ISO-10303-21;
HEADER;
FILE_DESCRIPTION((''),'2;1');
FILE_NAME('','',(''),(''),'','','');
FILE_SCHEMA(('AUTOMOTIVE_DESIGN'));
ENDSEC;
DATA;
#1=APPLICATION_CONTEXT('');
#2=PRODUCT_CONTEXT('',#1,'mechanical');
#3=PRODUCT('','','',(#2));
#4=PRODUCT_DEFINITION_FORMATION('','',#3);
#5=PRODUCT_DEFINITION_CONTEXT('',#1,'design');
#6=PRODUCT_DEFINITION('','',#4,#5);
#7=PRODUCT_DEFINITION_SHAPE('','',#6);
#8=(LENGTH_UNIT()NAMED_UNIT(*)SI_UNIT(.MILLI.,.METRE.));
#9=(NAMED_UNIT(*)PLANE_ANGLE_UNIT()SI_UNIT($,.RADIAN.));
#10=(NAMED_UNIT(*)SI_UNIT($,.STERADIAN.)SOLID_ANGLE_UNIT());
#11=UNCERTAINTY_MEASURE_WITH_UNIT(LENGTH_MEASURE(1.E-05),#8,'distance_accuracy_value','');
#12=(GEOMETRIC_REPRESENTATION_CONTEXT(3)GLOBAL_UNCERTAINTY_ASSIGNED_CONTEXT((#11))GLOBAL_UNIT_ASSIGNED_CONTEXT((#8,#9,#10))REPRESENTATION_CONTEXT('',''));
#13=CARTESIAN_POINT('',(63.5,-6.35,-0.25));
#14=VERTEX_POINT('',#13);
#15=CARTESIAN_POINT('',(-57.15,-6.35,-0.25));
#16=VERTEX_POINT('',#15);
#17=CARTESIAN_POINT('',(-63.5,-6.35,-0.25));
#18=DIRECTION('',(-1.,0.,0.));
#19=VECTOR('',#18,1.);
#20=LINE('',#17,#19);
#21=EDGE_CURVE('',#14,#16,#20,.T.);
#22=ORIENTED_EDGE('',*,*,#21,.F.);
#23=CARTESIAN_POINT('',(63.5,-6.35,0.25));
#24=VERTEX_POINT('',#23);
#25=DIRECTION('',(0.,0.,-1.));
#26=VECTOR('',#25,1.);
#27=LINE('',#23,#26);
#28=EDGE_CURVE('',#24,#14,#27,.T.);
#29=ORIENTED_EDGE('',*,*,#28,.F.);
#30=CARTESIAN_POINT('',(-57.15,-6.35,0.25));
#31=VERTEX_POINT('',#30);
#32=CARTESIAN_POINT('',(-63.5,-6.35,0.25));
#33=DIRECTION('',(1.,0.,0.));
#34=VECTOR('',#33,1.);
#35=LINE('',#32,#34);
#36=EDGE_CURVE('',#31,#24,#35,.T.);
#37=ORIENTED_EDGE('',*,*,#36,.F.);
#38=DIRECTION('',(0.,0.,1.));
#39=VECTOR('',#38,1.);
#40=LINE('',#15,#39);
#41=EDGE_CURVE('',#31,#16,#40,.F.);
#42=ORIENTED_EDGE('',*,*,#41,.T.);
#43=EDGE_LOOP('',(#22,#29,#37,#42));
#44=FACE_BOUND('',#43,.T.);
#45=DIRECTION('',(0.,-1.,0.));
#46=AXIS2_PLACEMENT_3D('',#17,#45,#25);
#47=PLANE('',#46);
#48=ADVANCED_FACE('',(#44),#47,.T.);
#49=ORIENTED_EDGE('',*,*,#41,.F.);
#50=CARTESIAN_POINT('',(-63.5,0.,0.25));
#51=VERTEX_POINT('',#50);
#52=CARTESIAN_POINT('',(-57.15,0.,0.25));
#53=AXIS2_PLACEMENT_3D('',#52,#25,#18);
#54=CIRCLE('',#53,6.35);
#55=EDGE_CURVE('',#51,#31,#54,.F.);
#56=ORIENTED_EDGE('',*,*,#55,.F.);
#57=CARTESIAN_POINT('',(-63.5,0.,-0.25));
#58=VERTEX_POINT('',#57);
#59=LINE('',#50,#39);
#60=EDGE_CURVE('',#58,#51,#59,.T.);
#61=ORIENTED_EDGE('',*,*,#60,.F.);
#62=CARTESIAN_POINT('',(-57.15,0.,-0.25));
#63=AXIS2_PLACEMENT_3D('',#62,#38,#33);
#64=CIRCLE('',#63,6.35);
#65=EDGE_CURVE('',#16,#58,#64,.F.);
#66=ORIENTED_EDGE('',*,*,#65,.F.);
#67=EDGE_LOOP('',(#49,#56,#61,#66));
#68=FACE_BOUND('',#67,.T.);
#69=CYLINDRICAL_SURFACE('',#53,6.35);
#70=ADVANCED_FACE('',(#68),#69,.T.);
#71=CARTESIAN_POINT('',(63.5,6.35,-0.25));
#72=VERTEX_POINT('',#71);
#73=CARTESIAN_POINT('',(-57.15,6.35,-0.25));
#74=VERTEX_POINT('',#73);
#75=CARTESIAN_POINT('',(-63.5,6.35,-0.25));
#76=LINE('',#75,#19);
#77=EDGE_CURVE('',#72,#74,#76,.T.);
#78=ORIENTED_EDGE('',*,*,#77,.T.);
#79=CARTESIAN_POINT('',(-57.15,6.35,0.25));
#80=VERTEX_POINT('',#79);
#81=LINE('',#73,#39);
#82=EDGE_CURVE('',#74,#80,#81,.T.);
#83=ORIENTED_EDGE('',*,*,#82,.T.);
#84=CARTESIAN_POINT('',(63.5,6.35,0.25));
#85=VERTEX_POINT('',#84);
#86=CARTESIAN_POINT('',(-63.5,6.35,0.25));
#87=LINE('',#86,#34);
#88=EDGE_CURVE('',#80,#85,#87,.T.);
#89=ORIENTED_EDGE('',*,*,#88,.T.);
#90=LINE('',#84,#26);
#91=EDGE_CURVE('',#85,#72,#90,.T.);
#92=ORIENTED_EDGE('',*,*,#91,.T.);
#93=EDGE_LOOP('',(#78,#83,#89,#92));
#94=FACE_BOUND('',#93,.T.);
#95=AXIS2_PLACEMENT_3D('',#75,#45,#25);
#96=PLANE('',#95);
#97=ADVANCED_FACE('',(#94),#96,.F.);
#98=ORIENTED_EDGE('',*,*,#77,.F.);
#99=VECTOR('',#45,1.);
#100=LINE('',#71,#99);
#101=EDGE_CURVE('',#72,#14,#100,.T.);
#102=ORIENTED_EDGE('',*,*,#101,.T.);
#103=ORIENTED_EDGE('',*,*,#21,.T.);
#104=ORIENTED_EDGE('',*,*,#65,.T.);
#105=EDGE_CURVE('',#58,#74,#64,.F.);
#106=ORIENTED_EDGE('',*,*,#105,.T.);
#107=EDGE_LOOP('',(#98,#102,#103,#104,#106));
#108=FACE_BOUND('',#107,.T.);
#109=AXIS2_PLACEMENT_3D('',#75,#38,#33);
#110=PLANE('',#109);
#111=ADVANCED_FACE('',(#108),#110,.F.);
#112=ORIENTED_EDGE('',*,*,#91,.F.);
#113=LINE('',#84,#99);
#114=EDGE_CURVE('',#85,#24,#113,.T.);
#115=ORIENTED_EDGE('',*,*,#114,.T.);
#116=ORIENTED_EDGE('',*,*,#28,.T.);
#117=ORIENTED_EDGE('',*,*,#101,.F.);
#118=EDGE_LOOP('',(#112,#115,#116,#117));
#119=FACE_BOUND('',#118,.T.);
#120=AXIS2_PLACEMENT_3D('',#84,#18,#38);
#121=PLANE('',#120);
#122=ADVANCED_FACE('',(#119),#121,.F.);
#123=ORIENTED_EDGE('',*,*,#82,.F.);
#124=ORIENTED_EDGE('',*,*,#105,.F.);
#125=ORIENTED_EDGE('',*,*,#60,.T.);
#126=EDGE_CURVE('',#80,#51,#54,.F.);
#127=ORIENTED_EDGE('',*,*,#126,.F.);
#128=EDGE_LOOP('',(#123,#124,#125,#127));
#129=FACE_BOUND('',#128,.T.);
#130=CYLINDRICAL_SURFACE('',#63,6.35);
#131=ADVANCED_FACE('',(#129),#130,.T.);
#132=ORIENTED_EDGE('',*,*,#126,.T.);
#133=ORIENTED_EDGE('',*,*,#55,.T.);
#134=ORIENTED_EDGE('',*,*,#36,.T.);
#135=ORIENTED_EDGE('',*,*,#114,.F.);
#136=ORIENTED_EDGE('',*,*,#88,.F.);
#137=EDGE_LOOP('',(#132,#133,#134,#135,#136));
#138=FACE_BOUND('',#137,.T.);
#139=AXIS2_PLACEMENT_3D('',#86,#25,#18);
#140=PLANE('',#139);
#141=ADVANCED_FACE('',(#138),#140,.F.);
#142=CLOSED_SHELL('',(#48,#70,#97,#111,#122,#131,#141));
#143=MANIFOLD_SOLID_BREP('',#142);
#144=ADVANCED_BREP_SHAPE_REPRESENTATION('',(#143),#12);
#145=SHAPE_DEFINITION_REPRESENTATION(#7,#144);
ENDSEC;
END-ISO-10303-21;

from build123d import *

# Parameters (mm, degrees)
SKETCH1_W          = 127
SKETCH1_H          = 0.5
BASE_EXTRUDE_DEPTH = 6.35
FILLET1_R          = 6.35


with BuildPart() as part:
    # Sketch1 → Base-Extrude (new, symmetric)
    with BuildSketch(Plane(origin=(0, 0, 0), x_dir=(1, 0, 0), z_dir=(0, 1, 0))):
        Rectangle(SKETCH1_W, SKETCH1_H)
    extrude(amount=BASE_EXTRUDE_DEPTH, both=True)

    # Fillet1
    fillet1_edges = [part.edges().sort_by_distance(p)[0] for p in [
        (-63.5, 6.35, 0),
        (-63.5, -6.35, 0),
    ]]
    fillet(fillet1_edges, radius=FILLET1_R - 0.0001)  # a hair under: the kernel refuses the full size


solid = part.part
